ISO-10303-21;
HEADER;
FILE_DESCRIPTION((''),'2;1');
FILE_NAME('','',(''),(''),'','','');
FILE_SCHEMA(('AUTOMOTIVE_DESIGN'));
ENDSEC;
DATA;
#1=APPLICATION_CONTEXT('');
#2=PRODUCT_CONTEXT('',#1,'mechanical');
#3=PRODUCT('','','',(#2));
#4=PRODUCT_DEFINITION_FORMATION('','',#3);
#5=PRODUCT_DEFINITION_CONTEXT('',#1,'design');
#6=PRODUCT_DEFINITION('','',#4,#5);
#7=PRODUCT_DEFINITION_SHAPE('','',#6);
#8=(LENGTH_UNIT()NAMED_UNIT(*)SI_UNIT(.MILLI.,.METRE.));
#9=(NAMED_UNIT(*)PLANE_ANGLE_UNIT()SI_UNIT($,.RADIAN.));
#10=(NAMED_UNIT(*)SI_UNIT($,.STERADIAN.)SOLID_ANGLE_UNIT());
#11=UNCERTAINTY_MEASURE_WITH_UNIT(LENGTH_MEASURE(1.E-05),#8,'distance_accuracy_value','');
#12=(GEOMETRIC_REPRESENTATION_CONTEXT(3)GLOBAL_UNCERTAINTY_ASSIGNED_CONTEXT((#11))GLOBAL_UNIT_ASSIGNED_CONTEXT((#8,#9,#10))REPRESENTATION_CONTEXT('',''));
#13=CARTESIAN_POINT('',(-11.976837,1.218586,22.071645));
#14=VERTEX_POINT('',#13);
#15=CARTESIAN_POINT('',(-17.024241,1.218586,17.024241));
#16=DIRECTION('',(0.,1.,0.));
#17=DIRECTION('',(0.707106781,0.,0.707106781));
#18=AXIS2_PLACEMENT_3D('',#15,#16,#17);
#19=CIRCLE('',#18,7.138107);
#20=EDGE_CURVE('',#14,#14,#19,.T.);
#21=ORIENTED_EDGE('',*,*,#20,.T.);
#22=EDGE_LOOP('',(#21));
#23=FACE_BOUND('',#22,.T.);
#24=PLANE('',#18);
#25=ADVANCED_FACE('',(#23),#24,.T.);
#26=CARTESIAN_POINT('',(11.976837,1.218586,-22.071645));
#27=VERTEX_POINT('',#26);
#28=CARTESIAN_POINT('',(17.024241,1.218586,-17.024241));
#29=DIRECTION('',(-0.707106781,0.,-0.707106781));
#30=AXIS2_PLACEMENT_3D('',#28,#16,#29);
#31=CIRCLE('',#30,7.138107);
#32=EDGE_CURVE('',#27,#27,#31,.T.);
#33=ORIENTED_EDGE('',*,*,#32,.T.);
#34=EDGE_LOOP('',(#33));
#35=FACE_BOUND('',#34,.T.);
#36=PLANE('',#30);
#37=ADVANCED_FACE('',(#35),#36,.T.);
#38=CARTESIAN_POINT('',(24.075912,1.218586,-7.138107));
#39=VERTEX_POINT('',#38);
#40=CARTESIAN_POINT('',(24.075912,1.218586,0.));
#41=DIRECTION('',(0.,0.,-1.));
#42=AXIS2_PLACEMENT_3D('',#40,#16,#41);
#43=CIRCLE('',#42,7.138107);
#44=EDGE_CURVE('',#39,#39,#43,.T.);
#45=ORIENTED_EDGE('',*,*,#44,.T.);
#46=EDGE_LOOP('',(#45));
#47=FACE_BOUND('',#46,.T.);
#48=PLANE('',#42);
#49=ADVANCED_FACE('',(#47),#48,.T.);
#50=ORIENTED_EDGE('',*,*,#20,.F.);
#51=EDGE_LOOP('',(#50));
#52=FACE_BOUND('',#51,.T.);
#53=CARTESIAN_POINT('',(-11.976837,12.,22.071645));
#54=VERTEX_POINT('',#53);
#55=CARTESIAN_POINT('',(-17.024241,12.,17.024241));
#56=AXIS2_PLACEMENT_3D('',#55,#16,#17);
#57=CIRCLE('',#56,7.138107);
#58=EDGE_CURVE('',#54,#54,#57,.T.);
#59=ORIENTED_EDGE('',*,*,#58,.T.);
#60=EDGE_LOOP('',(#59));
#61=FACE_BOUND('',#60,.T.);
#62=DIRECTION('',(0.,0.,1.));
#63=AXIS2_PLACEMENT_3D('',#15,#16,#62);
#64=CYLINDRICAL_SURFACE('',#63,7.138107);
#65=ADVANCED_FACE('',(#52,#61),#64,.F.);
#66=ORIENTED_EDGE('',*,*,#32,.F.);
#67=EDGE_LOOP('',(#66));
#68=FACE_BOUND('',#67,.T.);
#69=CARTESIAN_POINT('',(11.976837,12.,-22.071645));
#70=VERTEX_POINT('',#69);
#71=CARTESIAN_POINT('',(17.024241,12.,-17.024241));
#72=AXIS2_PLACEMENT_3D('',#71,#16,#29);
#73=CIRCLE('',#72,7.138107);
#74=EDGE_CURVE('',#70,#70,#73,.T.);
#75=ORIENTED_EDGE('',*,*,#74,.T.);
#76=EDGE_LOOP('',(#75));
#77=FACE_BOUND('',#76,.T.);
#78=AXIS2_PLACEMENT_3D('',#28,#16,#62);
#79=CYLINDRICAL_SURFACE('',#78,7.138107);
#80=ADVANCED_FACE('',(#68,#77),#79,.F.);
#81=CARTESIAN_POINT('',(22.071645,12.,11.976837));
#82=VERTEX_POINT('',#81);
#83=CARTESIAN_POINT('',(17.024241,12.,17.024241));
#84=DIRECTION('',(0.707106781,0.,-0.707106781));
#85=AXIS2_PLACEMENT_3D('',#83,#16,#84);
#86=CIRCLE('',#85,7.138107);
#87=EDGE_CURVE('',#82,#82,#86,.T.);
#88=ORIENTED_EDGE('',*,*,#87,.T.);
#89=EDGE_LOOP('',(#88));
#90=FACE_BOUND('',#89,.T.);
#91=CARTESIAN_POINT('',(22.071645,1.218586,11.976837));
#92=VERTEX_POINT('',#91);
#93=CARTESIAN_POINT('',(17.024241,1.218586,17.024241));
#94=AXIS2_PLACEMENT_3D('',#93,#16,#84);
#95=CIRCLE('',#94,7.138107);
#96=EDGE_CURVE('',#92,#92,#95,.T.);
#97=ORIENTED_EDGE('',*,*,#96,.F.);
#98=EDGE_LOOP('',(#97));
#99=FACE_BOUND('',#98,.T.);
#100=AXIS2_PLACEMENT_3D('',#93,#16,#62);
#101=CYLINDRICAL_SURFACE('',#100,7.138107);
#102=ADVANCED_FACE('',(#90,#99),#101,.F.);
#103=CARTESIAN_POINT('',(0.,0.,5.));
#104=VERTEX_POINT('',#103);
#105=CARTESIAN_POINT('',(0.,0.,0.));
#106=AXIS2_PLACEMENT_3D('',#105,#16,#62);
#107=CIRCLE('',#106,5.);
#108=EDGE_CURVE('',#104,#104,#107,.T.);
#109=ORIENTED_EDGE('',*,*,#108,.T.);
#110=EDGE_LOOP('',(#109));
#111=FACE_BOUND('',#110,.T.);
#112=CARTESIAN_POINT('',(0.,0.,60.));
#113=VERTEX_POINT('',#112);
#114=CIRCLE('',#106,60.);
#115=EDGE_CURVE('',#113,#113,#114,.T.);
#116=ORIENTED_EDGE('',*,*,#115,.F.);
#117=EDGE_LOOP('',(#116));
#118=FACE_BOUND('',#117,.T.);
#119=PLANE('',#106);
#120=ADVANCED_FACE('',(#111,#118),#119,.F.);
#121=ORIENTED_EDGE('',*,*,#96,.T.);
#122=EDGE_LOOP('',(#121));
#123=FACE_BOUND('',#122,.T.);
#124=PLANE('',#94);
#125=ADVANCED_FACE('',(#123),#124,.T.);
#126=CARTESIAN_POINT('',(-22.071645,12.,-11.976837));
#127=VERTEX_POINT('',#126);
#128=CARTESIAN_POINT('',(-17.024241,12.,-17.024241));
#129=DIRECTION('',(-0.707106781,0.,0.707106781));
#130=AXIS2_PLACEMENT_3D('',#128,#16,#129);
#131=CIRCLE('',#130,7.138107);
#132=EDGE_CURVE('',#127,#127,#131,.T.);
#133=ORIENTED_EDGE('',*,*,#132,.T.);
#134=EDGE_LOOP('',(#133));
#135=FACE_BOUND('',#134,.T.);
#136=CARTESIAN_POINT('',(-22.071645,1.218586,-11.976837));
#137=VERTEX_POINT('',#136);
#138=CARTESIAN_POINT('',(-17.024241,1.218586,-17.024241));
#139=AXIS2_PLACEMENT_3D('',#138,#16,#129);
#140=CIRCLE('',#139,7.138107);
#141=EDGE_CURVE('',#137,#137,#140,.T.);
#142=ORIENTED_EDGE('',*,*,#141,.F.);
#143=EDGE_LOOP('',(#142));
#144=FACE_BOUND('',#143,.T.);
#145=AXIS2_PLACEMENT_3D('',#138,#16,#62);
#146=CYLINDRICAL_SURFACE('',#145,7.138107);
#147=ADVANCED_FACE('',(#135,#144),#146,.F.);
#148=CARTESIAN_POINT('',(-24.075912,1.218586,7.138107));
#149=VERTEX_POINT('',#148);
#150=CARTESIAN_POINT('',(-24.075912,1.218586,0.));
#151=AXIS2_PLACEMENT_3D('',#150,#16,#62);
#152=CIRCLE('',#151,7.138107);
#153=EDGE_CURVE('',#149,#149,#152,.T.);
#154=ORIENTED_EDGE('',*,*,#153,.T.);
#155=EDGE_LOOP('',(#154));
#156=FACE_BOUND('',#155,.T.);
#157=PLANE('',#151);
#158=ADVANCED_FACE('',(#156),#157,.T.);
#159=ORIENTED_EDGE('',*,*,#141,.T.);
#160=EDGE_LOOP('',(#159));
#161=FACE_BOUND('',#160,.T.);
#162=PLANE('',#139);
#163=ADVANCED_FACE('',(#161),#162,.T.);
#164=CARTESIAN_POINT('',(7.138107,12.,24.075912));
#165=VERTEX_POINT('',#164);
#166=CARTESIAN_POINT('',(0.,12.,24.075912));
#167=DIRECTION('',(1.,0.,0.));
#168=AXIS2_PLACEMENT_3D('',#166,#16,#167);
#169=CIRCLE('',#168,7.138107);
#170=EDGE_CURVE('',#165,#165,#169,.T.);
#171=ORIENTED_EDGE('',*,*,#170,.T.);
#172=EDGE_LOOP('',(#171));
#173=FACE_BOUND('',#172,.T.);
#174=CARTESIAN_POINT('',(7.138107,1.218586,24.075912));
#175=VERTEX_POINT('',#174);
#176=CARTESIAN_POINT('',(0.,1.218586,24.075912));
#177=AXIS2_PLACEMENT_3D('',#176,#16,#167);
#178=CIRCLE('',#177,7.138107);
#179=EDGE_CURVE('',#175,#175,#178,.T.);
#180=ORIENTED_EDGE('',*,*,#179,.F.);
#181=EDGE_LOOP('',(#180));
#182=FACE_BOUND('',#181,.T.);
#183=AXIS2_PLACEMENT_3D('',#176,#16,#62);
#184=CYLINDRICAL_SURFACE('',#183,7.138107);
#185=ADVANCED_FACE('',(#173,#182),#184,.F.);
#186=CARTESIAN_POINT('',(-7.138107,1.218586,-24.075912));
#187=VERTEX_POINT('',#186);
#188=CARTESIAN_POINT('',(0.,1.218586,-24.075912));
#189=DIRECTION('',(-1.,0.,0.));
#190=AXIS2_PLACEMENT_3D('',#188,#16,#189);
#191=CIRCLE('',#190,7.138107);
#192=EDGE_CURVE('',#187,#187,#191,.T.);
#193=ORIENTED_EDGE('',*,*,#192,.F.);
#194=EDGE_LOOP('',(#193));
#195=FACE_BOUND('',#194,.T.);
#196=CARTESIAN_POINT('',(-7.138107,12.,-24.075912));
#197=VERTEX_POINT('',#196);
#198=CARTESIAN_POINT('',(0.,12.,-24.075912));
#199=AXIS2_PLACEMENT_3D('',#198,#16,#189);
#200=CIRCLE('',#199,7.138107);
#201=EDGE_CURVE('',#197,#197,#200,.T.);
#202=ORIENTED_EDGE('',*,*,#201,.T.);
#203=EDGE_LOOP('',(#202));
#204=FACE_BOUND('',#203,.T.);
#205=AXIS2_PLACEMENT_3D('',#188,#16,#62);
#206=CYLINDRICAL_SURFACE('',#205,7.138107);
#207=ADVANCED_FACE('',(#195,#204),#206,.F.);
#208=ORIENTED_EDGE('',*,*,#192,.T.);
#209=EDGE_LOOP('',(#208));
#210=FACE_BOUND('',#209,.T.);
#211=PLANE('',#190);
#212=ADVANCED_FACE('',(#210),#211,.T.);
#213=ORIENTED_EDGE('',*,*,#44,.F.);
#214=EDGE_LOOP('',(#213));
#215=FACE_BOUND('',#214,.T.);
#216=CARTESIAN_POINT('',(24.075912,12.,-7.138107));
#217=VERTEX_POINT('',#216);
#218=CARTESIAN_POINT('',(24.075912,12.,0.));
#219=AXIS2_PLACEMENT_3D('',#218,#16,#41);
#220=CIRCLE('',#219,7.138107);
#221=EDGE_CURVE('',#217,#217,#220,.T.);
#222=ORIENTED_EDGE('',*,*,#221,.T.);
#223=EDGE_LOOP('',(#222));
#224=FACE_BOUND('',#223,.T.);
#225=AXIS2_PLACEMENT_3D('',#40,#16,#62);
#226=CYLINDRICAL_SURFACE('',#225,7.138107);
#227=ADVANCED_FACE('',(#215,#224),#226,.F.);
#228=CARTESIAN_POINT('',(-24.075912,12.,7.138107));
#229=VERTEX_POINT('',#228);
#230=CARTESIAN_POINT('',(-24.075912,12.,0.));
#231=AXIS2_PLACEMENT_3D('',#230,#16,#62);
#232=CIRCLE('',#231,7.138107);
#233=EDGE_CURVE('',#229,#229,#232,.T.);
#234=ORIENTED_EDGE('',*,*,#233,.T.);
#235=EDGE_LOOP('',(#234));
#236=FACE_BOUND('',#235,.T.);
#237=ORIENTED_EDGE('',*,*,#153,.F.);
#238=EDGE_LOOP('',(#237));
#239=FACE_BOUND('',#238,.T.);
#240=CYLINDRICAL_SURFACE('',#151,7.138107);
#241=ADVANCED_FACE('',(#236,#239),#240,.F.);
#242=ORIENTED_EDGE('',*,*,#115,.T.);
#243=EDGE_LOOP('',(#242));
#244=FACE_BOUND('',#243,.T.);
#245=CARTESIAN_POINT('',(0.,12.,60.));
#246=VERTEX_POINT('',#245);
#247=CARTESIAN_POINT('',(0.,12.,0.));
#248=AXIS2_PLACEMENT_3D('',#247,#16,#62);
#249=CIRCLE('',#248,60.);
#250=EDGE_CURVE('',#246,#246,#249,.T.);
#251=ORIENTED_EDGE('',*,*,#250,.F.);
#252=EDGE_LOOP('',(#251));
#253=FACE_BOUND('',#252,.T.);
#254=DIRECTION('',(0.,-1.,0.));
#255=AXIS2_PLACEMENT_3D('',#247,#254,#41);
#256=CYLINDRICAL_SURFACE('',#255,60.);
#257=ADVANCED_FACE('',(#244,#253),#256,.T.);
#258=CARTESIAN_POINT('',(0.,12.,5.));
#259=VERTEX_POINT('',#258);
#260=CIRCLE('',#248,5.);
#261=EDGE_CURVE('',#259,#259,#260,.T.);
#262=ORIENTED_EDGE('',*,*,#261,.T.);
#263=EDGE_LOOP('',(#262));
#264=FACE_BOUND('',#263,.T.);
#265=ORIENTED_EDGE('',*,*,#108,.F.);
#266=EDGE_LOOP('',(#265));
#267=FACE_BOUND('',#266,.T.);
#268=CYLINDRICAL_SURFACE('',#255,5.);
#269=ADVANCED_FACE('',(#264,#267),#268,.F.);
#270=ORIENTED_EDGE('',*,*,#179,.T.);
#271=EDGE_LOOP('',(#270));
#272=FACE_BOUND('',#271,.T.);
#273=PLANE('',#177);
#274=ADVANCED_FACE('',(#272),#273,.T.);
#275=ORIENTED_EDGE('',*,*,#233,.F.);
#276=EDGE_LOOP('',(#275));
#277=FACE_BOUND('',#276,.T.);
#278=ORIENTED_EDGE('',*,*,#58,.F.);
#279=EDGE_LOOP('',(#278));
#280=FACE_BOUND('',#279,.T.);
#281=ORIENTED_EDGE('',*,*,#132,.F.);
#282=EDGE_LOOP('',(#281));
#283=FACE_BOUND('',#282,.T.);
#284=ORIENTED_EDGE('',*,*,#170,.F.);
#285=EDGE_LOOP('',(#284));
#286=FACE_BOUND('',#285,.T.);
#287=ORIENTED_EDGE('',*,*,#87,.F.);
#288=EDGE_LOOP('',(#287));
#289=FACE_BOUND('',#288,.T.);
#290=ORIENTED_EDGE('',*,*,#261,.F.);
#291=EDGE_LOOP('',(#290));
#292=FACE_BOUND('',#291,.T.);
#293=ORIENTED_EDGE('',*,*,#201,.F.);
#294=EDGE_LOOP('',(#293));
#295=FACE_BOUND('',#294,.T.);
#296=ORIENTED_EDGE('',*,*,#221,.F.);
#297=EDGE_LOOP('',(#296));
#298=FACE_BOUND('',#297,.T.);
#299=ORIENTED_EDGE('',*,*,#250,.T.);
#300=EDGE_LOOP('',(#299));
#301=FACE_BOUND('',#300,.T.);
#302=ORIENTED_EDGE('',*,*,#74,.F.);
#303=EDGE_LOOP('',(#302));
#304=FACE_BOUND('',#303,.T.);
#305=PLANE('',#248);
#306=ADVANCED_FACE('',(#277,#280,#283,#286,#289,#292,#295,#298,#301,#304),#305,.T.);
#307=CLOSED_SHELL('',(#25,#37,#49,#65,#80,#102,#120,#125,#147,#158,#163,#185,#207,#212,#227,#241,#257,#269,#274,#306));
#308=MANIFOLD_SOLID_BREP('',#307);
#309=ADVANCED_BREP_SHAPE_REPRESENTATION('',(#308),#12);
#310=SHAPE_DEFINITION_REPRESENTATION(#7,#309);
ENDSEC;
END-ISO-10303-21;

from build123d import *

# Parameters (mm, degrees)
SKETCH1_R           = 60
BOSS_EXTRUDE1_DEPTH = 12
SKETCH2_R           = 5
CUT_EXTRUDE1_DEPTH  = 86.697141143
SKETCH3_R           = 7.138106905
CUT_EXTRUDE2_DEPTH  = 10.781413925
CIRPATTERN1_COUNT   = 8


with BuildPart() as part:
    # Sketch1 → Boss-Extrude1 (new body)
    with BuildSketch(Plane(origin=(0, 0, 0), x_dir=(1, 0, 0), z_dir=(0, 1, 0))):
        Circle(SKETCH1_R)
    extrude(amount=BOSS_EXTRUDE1_DEPTH)

    # Sketch2 → Cut-Extrude1 (cut, through all)
    with BuildSketch(Plane(origin=(0, 0, 0), x_dir=(1, 0, 0), z_dir=(0, 1, 0))):
        Circle(SKETCH2_R)
    extrude(amount=CUT_EXTRUDE1_DEPTH, mode=Mode.SUBTRACT)

    # Sketch3 → Cut-Extrude2 (cut)
    with BuildSketch(Plane(origin=(0, 12, 0), x_dir=(1, 0, 0), z_dir=(0, 1, 0))):
        with Locations((-24.075912496, 0)):
            Circle(SKETCH3_R)
    cut_extrude2 = extrude(amount=-CUT_EXTRUDE2_DEPTH, mode=Mode.SUBTRACT)

    # CirPattern1: Cut-Extrude2 ×8 about axis
    cirpattern1_axis = Axis((0, 0, 0), (0, 1, 0))
    for i in range(1, CIRPATTERN1_COUNT):
        add(cut_extrude2.rotate(cirpattern1_axis, i * 360 / CIRPATTERN1_COUNT), mode=Mode.SUBTRACT)


solid = part.part
